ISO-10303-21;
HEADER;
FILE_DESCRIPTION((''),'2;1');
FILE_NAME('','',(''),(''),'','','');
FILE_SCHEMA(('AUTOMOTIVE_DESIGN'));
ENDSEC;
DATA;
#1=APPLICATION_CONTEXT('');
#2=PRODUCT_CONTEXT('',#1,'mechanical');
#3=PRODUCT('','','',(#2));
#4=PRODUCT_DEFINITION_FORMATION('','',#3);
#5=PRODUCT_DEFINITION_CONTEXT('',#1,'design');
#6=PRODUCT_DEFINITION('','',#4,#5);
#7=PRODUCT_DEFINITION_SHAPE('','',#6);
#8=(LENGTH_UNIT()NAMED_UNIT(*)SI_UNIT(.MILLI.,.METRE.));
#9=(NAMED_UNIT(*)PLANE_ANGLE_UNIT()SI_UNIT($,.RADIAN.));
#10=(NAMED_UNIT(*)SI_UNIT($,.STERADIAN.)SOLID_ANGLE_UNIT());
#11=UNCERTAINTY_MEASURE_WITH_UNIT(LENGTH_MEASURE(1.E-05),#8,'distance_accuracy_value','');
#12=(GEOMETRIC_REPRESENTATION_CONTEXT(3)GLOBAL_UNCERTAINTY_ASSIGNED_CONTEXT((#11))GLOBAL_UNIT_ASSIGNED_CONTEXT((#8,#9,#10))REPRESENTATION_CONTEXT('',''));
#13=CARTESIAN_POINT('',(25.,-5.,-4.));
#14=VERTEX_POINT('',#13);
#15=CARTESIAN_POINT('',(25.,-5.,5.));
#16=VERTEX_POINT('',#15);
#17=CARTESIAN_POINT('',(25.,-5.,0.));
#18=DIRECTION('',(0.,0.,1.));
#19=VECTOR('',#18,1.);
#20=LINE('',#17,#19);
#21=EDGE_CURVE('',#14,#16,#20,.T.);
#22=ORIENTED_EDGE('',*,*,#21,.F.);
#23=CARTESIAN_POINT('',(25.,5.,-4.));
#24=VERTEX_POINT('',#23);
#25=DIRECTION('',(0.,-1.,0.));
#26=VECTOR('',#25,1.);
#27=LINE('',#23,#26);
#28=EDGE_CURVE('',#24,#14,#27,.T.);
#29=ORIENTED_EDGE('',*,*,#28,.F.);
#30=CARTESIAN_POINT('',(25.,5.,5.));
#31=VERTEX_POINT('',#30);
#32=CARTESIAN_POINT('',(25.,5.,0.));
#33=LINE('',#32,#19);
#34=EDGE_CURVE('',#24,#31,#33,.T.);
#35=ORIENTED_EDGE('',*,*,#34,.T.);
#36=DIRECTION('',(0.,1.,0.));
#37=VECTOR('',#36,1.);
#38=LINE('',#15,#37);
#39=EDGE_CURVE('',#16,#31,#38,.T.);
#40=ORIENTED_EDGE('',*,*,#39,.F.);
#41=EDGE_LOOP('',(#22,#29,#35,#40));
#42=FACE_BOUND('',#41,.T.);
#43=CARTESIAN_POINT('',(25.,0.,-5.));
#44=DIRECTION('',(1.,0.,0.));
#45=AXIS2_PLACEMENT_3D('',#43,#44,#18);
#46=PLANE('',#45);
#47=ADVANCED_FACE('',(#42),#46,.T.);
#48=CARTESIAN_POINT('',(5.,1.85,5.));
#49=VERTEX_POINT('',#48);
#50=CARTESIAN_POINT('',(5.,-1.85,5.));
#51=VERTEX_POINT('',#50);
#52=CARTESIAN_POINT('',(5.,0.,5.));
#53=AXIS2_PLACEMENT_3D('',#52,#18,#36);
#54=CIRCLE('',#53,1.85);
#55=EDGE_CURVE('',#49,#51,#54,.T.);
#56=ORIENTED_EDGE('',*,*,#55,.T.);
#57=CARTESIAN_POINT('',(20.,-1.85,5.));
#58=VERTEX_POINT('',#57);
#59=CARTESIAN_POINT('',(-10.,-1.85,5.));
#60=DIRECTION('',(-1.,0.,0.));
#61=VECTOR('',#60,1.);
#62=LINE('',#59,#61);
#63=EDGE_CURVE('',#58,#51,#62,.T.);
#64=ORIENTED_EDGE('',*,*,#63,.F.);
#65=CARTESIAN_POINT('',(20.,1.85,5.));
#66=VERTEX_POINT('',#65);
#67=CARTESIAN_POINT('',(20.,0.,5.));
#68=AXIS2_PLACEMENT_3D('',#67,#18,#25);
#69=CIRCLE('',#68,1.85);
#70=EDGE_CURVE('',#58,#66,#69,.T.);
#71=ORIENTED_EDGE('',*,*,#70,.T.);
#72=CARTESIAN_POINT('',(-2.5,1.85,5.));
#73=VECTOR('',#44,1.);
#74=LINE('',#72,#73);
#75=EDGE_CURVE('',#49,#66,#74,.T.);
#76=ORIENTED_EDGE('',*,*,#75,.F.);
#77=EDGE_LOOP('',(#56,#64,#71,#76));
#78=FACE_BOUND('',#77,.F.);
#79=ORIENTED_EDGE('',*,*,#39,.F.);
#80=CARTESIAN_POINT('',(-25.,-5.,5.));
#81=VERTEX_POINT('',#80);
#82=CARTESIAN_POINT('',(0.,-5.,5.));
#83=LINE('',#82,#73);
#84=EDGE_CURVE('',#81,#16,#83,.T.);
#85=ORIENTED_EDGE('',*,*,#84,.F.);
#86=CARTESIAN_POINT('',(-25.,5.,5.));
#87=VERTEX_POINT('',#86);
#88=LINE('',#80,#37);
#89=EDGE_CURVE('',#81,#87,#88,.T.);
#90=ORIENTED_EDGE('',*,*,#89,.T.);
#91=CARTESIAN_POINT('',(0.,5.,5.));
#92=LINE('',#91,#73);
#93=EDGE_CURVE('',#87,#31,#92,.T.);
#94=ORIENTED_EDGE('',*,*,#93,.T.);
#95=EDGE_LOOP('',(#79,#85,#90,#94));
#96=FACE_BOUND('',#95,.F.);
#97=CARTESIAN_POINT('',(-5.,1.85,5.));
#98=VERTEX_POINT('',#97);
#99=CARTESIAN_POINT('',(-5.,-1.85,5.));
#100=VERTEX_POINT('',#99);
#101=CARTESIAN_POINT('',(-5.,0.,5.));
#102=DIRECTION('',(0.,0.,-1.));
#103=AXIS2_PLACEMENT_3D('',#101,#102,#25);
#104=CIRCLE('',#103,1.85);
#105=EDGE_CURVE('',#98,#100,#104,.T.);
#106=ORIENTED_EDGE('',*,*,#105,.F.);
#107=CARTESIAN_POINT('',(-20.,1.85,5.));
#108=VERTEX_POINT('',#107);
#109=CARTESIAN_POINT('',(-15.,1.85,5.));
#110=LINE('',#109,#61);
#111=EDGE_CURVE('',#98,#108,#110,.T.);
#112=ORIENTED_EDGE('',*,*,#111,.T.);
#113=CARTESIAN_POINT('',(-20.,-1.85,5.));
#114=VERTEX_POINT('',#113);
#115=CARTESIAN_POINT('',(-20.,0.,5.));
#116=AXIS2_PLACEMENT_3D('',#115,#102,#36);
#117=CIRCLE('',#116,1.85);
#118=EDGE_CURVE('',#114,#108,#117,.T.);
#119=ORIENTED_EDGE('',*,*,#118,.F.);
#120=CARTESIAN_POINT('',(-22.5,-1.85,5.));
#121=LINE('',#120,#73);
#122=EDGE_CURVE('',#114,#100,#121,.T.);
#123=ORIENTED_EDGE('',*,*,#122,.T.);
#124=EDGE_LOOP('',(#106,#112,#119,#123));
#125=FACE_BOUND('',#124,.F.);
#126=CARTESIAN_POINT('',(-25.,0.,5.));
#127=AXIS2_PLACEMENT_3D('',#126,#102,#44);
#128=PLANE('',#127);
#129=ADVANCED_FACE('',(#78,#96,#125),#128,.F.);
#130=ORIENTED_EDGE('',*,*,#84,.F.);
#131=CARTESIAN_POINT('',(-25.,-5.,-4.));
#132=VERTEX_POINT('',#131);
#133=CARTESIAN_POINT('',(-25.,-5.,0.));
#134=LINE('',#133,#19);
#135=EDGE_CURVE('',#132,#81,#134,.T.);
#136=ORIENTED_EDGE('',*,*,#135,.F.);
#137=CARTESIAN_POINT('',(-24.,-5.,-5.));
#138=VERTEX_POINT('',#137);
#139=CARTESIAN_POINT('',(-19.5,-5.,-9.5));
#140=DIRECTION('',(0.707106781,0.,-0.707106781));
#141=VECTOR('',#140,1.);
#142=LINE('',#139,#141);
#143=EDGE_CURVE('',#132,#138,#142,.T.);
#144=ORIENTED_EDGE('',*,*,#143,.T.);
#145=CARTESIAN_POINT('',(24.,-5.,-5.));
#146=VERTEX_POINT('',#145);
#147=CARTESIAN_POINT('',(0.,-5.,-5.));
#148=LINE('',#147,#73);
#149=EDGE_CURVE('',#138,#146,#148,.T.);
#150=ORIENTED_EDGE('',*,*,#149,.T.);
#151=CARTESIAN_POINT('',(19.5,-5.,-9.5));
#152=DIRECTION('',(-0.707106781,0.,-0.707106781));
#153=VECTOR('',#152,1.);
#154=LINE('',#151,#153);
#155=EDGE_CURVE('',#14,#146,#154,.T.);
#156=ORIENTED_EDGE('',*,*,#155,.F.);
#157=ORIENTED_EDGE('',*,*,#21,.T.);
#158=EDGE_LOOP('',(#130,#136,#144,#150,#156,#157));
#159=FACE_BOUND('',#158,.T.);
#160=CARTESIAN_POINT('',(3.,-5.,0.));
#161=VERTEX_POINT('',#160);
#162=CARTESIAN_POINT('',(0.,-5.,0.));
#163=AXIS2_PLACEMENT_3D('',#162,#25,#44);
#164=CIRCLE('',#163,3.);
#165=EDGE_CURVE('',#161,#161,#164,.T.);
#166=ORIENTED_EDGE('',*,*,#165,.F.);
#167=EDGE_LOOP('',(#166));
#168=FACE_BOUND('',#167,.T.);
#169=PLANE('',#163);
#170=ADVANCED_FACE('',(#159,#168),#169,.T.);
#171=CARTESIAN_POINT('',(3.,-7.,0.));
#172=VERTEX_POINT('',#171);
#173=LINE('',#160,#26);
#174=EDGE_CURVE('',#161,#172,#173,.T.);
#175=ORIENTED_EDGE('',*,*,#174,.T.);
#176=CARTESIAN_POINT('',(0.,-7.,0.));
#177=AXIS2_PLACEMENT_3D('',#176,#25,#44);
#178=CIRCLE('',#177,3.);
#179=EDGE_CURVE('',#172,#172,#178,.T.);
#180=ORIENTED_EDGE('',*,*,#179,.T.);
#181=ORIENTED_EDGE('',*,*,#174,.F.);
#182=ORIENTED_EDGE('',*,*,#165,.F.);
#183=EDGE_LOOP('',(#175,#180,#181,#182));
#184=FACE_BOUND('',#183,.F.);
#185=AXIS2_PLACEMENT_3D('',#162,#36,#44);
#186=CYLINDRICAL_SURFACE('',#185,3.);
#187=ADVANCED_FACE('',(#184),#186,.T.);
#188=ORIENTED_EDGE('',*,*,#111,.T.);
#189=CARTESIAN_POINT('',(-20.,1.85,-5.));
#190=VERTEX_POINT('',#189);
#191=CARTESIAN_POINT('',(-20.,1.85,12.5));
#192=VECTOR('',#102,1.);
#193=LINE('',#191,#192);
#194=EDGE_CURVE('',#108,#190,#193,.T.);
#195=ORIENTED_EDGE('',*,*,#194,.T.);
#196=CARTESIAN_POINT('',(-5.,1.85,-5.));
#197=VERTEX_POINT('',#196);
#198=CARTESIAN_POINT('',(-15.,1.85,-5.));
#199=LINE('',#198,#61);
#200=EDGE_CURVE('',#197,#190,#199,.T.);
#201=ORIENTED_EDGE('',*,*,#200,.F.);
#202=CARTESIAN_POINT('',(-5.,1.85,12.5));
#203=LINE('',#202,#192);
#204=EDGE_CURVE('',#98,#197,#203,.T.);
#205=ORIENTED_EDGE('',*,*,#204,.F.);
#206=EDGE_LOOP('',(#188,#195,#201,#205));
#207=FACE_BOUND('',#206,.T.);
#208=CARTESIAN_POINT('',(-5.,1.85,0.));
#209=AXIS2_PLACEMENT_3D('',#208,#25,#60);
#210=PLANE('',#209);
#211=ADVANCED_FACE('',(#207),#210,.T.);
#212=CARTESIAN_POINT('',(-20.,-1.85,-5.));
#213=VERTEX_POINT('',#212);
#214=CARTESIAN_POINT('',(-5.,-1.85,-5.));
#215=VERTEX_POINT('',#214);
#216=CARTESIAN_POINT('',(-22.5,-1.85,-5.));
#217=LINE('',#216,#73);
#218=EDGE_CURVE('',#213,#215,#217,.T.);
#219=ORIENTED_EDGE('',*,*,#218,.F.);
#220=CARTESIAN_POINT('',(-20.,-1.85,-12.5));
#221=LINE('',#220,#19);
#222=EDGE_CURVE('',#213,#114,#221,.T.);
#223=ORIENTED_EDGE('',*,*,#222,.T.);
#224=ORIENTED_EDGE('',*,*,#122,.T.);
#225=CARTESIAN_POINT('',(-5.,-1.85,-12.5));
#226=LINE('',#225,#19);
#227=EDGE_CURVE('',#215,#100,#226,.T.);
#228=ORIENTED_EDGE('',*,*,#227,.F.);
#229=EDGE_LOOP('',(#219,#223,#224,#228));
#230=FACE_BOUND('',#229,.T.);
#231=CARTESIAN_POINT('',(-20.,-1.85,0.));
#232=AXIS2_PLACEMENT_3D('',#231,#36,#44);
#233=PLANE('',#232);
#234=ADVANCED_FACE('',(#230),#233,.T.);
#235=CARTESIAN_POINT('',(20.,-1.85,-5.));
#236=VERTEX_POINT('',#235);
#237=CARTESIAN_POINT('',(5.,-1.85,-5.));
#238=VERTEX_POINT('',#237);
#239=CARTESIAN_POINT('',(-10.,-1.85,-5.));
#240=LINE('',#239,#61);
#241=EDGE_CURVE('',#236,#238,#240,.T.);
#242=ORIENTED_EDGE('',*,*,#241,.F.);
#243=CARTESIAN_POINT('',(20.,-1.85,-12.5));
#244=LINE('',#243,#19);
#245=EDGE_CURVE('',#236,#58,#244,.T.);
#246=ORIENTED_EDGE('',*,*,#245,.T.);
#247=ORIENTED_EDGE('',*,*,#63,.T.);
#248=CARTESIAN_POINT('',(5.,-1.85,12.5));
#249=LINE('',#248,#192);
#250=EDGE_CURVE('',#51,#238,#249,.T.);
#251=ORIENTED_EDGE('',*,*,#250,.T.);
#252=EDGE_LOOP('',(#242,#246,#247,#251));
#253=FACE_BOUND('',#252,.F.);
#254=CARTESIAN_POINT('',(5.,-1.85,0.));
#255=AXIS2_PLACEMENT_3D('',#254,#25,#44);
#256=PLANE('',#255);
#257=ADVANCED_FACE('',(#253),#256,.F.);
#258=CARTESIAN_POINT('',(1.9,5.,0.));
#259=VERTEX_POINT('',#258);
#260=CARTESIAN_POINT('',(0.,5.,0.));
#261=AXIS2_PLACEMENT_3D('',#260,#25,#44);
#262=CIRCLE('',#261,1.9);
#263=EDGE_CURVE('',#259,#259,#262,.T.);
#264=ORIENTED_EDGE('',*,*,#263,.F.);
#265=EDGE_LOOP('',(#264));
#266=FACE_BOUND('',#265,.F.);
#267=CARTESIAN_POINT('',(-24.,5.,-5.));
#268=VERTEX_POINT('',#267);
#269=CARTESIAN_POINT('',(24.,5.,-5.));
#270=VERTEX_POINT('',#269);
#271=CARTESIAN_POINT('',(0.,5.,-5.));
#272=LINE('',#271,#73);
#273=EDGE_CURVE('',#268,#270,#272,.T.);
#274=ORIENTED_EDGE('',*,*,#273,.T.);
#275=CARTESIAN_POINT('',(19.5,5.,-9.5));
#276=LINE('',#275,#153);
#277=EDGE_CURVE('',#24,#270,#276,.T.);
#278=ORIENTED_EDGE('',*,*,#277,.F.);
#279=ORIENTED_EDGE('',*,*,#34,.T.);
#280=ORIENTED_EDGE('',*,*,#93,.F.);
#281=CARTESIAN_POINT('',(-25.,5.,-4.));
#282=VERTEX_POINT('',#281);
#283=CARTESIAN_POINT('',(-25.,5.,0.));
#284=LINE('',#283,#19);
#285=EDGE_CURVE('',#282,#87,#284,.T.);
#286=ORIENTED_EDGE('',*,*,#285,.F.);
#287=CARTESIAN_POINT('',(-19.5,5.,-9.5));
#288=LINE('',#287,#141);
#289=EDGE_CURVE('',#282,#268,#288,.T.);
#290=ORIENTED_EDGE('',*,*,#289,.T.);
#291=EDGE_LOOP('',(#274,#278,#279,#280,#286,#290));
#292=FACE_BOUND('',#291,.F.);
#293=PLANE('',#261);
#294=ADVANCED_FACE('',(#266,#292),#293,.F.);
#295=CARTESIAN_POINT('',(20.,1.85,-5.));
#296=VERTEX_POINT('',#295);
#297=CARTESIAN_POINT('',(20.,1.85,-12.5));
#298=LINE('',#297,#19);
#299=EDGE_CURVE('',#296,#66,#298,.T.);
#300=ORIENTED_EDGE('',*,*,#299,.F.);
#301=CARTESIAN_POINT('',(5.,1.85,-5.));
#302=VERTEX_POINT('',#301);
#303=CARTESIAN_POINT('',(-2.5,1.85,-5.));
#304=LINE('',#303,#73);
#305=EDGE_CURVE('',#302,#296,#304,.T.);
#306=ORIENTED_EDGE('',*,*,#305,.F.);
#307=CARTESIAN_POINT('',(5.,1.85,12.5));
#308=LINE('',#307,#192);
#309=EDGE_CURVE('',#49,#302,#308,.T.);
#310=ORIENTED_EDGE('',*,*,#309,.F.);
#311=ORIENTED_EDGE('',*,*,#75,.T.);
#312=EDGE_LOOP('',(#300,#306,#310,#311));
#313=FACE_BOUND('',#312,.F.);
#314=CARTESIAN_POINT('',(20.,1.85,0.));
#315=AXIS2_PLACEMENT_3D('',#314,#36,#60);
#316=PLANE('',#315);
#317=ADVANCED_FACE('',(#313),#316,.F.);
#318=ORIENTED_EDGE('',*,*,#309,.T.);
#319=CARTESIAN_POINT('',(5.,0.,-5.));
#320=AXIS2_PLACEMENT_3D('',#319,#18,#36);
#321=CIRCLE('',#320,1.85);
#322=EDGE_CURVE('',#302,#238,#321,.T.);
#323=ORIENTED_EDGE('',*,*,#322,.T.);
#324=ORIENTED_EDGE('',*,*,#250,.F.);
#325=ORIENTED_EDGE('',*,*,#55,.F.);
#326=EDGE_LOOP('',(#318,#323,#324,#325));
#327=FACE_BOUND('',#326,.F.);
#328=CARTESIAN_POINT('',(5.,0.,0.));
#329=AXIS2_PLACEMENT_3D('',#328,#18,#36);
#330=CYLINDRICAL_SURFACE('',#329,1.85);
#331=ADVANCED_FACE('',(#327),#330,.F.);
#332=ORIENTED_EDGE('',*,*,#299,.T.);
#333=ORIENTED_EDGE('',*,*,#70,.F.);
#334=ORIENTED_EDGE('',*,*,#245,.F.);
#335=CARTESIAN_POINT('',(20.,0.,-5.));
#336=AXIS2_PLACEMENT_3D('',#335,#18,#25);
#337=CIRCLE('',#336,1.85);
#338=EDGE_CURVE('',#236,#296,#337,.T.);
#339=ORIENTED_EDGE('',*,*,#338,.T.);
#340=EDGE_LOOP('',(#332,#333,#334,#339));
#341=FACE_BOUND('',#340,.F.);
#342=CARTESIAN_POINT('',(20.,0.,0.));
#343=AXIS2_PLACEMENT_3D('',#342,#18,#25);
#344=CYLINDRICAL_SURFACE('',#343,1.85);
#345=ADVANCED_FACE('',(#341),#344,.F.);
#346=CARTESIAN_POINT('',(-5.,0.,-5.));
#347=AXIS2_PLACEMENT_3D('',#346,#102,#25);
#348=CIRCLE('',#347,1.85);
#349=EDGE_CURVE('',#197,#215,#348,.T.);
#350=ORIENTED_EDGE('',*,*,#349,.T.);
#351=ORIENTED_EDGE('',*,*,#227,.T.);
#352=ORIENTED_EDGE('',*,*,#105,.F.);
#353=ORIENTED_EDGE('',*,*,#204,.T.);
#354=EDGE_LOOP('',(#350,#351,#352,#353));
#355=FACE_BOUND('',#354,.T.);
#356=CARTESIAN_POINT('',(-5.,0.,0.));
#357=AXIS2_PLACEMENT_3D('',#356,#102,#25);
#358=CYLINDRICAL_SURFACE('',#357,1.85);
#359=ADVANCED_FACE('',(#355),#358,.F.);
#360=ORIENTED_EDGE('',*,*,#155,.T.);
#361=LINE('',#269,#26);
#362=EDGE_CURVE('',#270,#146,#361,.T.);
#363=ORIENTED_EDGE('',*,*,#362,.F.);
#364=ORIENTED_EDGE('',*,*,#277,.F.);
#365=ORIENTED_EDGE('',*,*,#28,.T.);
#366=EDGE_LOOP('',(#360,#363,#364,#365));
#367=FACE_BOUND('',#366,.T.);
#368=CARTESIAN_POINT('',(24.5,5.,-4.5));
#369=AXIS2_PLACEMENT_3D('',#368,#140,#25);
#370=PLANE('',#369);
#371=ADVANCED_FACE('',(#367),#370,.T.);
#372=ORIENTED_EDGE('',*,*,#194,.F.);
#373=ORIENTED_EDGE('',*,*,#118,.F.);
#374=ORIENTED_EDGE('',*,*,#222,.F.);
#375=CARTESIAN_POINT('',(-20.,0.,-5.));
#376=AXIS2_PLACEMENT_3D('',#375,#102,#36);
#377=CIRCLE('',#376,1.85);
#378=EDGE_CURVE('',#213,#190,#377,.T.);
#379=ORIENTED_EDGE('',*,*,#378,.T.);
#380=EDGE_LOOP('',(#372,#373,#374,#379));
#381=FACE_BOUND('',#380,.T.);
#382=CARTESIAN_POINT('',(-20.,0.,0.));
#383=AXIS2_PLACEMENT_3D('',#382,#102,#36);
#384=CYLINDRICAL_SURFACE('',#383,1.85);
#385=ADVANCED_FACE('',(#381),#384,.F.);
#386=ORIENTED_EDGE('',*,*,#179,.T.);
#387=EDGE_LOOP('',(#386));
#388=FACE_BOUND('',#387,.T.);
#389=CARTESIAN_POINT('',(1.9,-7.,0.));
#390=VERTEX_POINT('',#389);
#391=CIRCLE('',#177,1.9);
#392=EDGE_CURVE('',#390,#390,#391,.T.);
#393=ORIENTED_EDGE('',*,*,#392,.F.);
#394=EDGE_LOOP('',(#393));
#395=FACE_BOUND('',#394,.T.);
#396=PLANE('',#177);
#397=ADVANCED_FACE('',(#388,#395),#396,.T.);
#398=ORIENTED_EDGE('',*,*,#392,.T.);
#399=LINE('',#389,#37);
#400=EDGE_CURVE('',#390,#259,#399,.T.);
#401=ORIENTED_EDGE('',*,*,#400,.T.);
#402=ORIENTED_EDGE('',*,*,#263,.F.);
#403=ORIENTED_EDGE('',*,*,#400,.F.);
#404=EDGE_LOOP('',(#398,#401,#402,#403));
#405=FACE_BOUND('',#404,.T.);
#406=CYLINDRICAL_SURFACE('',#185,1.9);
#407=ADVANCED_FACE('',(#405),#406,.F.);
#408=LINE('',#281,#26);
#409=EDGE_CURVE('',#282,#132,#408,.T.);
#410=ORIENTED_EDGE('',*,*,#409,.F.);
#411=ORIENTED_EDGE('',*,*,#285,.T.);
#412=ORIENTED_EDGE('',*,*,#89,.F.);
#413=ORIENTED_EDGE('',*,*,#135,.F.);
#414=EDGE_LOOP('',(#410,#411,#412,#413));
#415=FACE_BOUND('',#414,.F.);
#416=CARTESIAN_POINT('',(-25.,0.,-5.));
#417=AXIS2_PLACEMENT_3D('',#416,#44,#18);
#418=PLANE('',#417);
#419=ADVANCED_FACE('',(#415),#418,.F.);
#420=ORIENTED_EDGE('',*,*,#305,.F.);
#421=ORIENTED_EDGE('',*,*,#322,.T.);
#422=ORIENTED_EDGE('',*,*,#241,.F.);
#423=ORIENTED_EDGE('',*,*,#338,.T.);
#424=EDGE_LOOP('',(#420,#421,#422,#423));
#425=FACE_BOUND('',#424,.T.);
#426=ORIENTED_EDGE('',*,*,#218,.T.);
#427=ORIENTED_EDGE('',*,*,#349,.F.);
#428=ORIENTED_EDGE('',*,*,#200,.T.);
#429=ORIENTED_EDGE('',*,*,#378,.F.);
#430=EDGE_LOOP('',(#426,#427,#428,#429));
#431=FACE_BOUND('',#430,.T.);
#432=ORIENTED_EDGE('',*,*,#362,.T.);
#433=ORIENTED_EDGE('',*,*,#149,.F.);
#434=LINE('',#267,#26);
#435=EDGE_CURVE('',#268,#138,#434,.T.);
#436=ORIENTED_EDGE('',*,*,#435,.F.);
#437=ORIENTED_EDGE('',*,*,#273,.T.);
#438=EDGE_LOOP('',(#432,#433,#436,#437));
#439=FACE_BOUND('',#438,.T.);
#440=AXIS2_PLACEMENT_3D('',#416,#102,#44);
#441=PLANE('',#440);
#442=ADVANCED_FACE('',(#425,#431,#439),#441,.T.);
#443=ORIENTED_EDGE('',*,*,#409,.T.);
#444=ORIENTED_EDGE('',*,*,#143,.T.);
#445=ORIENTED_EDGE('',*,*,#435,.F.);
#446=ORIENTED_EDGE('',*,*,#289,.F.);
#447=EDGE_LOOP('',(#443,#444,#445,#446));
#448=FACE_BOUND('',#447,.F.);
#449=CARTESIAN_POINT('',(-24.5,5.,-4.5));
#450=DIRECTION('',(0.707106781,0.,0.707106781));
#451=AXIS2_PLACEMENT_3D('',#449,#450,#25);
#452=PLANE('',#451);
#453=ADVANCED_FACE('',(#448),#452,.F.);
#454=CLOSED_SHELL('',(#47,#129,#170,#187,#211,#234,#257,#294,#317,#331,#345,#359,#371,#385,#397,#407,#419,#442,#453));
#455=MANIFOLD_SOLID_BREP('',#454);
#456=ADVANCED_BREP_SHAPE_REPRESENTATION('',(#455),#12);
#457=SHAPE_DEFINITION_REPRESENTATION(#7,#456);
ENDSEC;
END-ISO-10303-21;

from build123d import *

# Parameters (mm, degrees)
F0_W     = 50
F0_H     = 10
F0_R     = 1.9
F1_DEPTH = 5
F2_SIZE  = 1
F4_DEPTH = 12.5
F5_R     = 3
F5_R_2   = 1.9
F6_DEPTH = 2


# Not quite as in the source:
# - a feature names something its author has since deleted; it is built from what else it names


with BuildPart() as f1:
    # F0 (on Front) → F1 (new body, symmetric)
    with BuildSketch(Plane.XZ):
        Rectangle(F0_W, F0_H)
        Circle(F0_R, mode=Mode.SUBTRACT)
    extrude(amount=F1_DEPTH, both=True)

    # F2
    f2_edges = [f1.edges().sort_by_distance(p)[0] for p in [
        (-25, 0, -5),
        (25, 0, -5),
    ]]
    chamfer(f2_edges, length=F2_SIZE)

    # F3 (on Top) → F4 (cut, symmetric)
    with BuildSketch(Plane.XY):
        with BuildLine():
            ThreePointArc((-20, 1.85), (-21.85, 0), (-20, -1.85))
            Line((-20, -1.85), (-5, -1.85))
            ThreePointArc((-5, -1.85), (-3.15, 0), (-5, 1.85))
            Line((-5, 1.85), (-20, 1.85))
        make_face()
        with BuildLine():
            Line((5, -1.85), (20, -1.85))
            ThreePointArc((20, -1.85), (21.85, 0), (20, 1.85))
            Line((20, 1.85), (5, 1.85))
            ThreePointArc((5, 1.85), (3.15, 0), (5, -1.85))
        make_face()
    extrude(amount=F4_DEPTH, both=True, mode=Mode.SUBTRACT)

    # F5 (on face) → F6 (join)
    with BuildSketch(Plane.XZ.offset(5)):
        Circle(F5_R)
        Circle(F5_R_2, mode=Mode.SUBTRACT)
    extrude(amount=F6_DEPTH)


solid = f1.part
